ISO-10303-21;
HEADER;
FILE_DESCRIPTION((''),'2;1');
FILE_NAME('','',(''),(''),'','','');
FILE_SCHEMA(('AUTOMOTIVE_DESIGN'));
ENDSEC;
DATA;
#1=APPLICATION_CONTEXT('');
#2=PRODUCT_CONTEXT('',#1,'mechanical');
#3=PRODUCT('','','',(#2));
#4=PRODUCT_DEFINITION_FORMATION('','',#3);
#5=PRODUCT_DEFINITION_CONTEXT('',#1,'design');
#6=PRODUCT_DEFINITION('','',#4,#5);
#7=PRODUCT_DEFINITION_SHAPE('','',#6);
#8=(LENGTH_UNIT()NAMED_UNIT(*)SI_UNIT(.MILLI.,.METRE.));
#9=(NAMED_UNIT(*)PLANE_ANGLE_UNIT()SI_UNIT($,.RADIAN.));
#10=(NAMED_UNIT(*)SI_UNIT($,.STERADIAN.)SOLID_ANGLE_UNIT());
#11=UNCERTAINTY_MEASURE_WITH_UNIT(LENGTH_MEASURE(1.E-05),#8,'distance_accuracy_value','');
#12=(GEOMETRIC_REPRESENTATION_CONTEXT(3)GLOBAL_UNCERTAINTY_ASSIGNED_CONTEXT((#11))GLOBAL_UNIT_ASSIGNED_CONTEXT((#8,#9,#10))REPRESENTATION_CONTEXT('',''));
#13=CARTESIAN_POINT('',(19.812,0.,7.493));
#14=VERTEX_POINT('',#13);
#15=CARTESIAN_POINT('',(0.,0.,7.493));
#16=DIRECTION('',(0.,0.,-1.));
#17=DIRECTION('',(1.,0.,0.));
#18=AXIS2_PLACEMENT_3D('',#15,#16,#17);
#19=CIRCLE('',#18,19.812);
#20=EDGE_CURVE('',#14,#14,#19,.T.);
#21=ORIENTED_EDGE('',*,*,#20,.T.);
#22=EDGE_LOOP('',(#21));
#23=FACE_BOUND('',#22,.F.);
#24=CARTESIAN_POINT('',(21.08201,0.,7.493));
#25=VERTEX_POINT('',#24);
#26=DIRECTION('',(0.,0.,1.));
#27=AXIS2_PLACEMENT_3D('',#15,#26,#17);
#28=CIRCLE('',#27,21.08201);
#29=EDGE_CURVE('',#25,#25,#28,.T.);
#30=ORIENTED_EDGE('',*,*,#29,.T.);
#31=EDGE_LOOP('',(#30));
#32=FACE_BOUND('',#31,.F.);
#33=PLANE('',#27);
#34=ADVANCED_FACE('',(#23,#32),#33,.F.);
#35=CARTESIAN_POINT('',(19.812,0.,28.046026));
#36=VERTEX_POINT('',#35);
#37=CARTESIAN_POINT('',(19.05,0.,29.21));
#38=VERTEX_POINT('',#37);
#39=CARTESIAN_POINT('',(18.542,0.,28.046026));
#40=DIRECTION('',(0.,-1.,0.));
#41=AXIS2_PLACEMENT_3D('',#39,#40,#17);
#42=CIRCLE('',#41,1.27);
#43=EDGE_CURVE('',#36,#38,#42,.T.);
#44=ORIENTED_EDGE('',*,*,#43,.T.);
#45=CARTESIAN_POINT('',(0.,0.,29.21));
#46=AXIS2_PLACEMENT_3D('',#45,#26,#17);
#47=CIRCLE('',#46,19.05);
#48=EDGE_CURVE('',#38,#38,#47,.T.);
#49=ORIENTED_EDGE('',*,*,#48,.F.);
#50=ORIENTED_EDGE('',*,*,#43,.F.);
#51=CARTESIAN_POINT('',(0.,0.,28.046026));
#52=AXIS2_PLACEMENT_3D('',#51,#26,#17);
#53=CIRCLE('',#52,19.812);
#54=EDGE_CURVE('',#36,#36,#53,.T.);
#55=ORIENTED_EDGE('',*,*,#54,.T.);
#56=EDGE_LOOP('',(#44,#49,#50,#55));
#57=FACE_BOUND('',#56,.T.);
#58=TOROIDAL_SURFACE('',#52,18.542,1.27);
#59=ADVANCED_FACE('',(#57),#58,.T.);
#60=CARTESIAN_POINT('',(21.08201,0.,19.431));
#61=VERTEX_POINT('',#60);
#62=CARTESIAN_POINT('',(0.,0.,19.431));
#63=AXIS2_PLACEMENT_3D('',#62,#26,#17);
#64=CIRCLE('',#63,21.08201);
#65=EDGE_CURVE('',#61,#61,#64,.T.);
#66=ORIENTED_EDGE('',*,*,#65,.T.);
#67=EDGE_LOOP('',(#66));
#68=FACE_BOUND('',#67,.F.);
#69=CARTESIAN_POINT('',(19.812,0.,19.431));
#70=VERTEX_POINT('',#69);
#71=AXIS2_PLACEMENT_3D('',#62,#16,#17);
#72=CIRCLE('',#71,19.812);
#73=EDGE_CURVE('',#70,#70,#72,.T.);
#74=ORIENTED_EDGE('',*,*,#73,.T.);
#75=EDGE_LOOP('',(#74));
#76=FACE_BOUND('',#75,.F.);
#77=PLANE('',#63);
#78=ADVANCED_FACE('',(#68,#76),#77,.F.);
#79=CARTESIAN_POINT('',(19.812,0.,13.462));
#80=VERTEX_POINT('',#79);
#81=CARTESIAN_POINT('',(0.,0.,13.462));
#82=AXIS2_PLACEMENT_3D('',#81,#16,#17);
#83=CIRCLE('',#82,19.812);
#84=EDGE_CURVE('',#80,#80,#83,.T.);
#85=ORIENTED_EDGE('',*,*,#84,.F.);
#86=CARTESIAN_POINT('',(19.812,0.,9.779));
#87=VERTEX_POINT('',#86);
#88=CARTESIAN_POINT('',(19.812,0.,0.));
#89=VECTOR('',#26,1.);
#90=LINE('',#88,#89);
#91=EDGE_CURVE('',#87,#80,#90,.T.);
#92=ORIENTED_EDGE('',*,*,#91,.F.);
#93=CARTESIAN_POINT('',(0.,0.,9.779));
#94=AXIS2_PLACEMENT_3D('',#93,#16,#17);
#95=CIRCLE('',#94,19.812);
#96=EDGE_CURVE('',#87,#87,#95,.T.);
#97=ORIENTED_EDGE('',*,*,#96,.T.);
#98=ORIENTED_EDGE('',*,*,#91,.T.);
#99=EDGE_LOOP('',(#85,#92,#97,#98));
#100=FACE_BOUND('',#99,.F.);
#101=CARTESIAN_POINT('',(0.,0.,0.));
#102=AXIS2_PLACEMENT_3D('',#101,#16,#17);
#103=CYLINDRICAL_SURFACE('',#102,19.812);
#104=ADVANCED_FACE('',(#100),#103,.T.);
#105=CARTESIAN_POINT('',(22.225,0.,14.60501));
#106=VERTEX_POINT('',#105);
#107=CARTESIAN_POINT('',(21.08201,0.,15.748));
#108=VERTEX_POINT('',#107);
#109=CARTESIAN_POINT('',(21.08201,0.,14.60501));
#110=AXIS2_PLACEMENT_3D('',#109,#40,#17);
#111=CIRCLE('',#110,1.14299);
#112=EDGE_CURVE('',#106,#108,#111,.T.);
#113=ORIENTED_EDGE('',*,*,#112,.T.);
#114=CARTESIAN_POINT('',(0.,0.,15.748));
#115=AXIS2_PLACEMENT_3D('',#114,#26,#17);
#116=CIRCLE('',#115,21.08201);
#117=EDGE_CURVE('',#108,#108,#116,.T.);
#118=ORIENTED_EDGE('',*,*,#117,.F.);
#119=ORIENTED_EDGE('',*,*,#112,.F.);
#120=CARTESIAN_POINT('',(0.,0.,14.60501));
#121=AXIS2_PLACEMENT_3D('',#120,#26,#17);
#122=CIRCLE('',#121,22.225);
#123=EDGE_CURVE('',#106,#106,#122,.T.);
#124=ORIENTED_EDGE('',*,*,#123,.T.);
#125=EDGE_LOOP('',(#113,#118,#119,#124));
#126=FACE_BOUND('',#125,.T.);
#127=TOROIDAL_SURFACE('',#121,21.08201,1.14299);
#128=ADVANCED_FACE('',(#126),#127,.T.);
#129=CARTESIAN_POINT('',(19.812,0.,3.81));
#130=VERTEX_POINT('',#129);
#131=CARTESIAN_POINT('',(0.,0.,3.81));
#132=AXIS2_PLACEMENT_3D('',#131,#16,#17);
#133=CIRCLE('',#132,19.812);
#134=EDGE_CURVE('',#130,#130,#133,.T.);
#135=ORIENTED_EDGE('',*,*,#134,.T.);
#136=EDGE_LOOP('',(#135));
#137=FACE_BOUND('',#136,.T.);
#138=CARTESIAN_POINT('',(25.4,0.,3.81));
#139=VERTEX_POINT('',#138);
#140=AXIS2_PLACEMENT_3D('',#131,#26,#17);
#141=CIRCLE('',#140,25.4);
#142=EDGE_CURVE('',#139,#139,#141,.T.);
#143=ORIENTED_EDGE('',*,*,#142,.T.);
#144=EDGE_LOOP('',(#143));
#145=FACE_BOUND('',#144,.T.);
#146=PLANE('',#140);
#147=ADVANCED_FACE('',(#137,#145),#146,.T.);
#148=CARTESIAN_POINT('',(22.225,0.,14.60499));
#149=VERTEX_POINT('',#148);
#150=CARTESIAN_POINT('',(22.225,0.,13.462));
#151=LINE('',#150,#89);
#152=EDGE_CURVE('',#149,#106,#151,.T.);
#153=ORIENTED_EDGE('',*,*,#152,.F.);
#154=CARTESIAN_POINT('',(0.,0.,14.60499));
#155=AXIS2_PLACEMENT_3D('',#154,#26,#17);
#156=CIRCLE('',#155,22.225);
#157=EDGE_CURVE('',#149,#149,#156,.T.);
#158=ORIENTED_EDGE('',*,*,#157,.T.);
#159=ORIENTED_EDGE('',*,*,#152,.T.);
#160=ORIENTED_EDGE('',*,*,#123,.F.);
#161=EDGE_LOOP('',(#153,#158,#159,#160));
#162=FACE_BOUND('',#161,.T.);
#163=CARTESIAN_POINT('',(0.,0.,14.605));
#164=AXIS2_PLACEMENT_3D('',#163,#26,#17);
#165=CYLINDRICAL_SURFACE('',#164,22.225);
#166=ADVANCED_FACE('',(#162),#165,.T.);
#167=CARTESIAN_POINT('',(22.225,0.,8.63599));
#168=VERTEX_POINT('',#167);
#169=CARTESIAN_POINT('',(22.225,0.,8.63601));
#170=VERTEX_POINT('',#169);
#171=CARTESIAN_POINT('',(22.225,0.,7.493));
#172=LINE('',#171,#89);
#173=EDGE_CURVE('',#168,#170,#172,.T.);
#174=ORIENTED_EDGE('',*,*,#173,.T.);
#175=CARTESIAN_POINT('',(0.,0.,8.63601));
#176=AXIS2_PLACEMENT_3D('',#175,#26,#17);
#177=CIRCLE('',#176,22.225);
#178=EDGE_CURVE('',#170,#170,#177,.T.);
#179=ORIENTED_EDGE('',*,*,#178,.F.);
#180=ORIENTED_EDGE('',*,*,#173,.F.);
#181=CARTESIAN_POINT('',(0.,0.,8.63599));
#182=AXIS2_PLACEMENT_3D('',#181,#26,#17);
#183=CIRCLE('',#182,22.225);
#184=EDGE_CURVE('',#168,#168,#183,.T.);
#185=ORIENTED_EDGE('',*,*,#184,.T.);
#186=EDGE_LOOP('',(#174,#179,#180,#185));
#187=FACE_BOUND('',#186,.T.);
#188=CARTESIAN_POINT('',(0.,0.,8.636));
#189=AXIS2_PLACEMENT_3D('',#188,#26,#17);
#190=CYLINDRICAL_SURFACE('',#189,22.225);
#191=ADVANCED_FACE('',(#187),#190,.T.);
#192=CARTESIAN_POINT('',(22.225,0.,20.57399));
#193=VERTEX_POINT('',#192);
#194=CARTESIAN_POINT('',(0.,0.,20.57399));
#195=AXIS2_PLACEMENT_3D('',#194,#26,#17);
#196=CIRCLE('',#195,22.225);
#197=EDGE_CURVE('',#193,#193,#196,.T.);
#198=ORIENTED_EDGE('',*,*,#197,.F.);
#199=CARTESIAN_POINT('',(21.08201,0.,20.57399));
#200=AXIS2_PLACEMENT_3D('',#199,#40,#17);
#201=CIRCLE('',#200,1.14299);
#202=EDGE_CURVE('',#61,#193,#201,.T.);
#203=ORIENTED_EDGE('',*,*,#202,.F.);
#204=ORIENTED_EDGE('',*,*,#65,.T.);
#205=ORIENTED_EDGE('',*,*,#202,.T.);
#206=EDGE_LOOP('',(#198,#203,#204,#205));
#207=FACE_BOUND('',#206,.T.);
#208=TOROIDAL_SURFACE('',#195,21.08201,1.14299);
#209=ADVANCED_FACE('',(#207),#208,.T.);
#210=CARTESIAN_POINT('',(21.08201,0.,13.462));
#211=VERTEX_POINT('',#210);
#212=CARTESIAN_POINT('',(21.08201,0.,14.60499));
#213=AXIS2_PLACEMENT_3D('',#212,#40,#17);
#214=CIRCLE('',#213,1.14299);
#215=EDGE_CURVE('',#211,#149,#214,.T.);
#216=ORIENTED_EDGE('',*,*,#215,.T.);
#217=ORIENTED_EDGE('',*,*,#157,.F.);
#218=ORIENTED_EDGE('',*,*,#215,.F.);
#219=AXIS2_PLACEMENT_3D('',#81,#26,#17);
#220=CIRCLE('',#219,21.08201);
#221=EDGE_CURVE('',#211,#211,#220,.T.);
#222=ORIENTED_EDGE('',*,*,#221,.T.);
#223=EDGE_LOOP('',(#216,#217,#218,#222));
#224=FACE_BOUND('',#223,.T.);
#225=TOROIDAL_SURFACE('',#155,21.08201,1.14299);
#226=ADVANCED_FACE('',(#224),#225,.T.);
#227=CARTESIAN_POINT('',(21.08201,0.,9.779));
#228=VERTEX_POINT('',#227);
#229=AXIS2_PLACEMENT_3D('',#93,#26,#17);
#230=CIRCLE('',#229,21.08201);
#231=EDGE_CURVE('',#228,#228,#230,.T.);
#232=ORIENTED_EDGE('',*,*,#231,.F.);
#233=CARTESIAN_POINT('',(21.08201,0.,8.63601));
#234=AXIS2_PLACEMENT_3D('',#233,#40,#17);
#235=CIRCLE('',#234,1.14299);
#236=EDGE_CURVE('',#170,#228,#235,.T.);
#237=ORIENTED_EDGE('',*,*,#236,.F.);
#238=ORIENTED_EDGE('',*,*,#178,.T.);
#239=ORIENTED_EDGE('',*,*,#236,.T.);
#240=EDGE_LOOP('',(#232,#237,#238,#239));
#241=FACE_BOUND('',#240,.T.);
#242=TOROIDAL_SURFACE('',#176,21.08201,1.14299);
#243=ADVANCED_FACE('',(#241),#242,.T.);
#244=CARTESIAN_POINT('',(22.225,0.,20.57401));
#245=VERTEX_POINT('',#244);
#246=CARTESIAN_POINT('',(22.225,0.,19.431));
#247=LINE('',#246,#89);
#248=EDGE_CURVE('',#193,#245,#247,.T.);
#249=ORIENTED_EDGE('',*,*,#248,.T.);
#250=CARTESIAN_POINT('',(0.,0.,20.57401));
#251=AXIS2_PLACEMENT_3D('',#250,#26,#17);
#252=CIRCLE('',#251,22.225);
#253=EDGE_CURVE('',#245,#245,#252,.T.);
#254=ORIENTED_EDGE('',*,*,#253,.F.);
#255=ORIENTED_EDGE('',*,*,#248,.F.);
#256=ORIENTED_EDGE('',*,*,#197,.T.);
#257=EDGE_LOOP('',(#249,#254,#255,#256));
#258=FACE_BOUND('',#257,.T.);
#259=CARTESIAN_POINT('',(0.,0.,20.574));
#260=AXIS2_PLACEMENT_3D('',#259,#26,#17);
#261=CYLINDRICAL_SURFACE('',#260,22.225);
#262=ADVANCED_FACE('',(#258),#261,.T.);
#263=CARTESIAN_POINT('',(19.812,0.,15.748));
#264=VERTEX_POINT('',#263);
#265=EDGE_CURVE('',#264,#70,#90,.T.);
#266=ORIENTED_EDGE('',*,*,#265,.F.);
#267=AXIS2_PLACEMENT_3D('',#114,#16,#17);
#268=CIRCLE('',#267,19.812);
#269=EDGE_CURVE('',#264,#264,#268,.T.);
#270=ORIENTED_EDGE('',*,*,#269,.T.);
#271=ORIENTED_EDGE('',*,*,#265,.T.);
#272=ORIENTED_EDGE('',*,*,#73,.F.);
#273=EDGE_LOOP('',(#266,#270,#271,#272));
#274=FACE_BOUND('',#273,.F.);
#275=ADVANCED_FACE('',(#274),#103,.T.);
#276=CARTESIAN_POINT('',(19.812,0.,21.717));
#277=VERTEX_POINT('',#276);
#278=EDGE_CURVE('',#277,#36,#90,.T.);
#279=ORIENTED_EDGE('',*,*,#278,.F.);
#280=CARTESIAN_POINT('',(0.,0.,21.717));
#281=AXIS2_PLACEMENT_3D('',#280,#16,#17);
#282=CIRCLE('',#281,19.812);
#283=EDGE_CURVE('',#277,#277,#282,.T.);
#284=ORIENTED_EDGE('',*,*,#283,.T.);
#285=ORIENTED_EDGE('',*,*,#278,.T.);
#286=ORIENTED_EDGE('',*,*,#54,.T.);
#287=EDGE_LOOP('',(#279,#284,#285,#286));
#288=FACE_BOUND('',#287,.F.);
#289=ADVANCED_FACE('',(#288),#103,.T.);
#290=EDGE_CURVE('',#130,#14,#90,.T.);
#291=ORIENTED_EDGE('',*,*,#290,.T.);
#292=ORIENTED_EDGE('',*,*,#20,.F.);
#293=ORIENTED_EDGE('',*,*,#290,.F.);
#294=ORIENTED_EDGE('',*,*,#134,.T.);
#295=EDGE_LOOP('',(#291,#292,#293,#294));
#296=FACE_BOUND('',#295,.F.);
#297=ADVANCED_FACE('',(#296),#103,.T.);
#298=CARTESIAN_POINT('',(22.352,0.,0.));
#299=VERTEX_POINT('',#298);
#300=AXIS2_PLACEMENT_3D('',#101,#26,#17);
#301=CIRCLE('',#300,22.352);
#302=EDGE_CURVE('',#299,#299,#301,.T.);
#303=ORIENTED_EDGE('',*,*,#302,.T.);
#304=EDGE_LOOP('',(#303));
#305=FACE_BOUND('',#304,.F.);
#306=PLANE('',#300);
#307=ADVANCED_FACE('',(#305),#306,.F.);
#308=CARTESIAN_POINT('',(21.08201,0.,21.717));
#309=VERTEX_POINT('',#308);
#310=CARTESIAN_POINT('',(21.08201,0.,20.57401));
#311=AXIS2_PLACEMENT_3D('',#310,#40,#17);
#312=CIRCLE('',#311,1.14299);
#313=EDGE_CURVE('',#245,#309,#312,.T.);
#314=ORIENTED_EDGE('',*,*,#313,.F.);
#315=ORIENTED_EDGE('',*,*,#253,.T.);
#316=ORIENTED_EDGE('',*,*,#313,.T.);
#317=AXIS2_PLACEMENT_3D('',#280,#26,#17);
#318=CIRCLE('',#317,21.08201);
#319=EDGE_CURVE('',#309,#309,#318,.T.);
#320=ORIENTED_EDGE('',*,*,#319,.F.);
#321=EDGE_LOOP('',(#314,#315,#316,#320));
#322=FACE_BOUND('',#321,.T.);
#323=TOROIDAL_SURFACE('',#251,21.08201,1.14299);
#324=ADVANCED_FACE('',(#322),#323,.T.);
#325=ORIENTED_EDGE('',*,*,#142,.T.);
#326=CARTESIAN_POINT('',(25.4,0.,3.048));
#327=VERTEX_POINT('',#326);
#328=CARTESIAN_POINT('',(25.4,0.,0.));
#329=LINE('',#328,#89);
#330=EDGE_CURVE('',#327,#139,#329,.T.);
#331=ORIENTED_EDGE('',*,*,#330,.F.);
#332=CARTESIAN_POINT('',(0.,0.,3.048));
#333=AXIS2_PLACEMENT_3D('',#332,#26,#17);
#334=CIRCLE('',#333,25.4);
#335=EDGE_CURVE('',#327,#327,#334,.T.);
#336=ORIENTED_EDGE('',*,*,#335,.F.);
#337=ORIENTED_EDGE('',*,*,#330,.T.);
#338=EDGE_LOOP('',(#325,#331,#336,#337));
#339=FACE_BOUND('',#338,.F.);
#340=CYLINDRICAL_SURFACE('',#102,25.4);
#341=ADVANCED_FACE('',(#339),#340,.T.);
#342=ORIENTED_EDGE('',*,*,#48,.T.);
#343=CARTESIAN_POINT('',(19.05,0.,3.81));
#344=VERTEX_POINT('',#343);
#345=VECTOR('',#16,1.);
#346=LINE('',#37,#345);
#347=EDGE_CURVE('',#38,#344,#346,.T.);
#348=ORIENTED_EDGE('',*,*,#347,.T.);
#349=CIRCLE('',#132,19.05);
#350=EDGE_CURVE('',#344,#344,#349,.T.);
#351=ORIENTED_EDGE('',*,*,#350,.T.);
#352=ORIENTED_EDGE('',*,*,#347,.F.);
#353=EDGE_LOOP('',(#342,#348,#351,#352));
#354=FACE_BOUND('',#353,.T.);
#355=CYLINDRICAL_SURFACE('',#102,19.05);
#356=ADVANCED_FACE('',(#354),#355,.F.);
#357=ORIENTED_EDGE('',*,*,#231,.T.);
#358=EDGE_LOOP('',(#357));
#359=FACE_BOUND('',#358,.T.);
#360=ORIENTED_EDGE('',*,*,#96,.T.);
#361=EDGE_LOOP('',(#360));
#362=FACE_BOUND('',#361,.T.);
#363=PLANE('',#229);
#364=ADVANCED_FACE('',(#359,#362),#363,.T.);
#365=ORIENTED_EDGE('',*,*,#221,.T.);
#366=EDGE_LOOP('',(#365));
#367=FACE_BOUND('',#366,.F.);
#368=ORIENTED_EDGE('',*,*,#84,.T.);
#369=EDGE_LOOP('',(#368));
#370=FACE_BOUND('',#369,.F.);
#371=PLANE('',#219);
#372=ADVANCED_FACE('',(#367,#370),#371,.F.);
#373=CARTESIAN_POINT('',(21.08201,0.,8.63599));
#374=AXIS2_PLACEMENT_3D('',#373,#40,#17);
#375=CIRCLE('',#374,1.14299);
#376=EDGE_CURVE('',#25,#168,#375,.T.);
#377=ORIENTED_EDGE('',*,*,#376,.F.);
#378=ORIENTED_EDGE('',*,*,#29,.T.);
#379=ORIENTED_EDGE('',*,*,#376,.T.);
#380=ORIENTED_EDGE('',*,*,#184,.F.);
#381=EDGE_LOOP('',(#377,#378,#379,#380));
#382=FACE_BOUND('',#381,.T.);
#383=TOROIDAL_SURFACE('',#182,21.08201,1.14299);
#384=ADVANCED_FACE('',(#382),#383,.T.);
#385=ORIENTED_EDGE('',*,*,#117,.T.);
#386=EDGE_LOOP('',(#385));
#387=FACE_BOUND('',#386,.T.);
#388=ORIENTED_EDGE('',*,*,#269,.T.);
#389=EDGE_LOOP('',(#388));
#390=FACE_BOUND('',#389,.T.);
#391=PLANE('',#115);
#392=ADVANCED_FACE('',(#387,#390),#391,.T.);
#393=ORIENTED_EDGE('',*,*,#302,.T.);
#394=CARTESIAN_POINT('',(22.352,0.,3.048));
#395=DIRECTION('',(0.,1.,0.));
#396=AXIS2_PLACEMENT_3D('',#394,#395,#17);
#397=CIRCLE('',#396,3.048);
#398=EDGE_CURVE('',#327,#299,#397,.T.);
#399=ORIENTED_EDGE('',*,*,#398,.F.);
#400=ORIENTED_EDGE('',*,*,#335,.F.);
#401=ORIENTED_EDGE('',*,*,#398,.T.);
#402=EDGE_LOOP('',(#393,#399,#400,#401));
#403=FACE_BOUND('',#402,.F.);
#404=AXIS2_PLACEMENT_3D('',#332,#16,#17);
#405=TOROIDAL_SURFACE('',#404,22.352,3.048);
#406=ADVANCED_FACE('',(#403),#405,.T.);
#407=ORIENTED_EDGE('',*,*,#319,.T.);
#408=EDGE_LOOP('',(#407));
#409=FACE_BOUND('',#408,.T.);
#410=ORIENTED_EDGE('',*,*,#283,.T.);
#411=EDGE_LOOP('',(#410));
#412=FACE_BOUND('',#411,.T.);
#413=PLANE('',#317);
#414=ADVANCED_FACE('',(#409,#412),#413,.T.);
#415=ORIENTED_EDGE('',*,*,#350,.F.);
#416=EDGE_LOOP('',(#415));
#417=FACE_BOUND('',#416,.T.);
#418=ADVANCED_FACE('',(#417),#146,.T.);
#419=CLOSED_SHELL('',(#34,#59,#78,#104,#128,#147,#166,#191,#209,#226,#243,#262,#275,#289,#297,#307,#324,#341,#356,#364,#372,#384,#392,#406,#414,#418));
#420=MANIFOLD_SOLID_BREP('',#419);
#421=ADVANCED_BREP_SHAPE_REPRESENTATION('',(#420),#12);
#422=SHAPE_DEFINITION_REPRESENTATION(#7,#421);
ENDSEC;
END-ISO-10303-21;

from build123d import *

# Parameters (mm, degrees)
F0_R      = 19.812
F0_R_2    = 19.05
F1_DEPTH  = 29.21
F0_R_3    = 25.4
F2_DEPTH  = 3.81
F6_R      = 22.225
F6_R_2    = 19.05
F9_DEPTH  = 1.143
F7_R      = 22.225
F7_R_2    = 19.05
F10_DEPTH = 1.143
F8_R      = 22.225
F8_R_2    = 19.05
F11_DEPTH = 1.143
F12_R     = 3.048
F14_R     = 1.14299
F15_R     = 1.14299
F16_R     = 1.14299


# Not quite as in the source:
# - a fillet or chamfer that OpenCascade refuses, or shapes differently, is made with other operations: its cross-section is extruded or revolved along the edge and cut away or added
# - a fillet or chamfer is up to 0.001 mm smaller than in the source, because OpenCascade refuses the exact size


with BuildPart() as f1:
    # F0 (on Top) → F1 (new body)
    with BuildSketch(Plane.XY):
        Circle(F0_R)
        Circle(F0_R_2, mode=Mode.SUBTRACT)
    extrude(amount=F1_DEPTH)

    # F0 (on Top) → F2 (join)
    with BuildSketch(Plane.XY):
        Circle(F0_R_3)
        Circle(F0_R, mode=Mode.SUBTRACT)
        Circle(F0_R)
        Circle(F0_R_2, mode=Mode.SUBTRACT)
        Circle(F0_R_2)
    extrude(amount=F2_DEPTH)

    # F6 (on offset) → F9 (join, symmetric)
    with BuildSketch(Plane.XY.offset(8.636)):
        Circle(F6_R)
        Circle(F6_R_2, mode=Mode.SUBTRACT)
    extrude(amount=F9_DEPTH, both=True)

    # F7 (on offset) → F10 (join, symmetric)
    with BuildSketch(Plane.XY.offset(14.605)):
        Circle(F7_R)
        Circle(F7_R_2, mode=Mode.SUBTRACT)
    extrude(amount=F10_DEPTH, both=True)

    # F8 (on offset) → F11 (join, symmetric)
    with BuildSketch(Plane.XY.offset(20.574)):
        Circle(F8_R)
        Circle(F8_R_2, mode=Mode.SUBTRACT)
    extrude(amount=F11_DEPTH, both=True)

    # F12
    f12_edges = [f1.edges().sort_by_distance(p)[0] for p in [
        (-25.4, 0, 0),
    ]]
    fillet(f12_edges, radius=F12_R)

    # F13: fillet of radius 1.27 on 1 edges, made by hand

    # F13_s1 → F13_t2 (revolve, cut)
    with BuildSketch(Plane.XZ):
        with BuildLine():
            ThreePointArc((19.812, 28.0460257735), (19.6045582337, 28.7416334215), (19.05, 29.21))
            Line((19.05, 29.21), (19.812, 29.21))
            Line((19.812, 29.21), (19.812, 28.0460257735))
        make_face()
    revolve(axis=Axis((0, 0, 29.21), (0, 0, 1)), mode=Mode.SUBTRACT)

    # F14 (radius 1.143 in the source; OpenCascade refuses exactly that, so slightly less here)
    f14_edges = [f1.edges().sort_by_distance(p)[0] for p in [
        (-22.225, 0, 7.493),
        (-22.225, 0, 9.779),
    ]]
    fillet(f14_edges, radius=F14_R)

    # F15 (radius 1.143 in the source; OpenCascade refuses exactly that, so slightly less here)
    f15_edges = [f1.edges().sort_by_distance(p)[0] for p in [
        (-22.225, 0, 13.462),
        (-22.225, 0, 15.748),
    ]]
    fillet(f15_edges, radius=F15_R)

    # F16 (radius 1.143 in the source; OpenCascade refuses exactly that, so slightly less here)
    f16_edges = [f1.edges().sort_by_distance(p)[0] for p in [
        (-22.225, 0, 19.431),
        (-22.225, 0, 21.717),
    ]]
    fillet(f16_edges, radius=F16_R)


solid = f1.part
